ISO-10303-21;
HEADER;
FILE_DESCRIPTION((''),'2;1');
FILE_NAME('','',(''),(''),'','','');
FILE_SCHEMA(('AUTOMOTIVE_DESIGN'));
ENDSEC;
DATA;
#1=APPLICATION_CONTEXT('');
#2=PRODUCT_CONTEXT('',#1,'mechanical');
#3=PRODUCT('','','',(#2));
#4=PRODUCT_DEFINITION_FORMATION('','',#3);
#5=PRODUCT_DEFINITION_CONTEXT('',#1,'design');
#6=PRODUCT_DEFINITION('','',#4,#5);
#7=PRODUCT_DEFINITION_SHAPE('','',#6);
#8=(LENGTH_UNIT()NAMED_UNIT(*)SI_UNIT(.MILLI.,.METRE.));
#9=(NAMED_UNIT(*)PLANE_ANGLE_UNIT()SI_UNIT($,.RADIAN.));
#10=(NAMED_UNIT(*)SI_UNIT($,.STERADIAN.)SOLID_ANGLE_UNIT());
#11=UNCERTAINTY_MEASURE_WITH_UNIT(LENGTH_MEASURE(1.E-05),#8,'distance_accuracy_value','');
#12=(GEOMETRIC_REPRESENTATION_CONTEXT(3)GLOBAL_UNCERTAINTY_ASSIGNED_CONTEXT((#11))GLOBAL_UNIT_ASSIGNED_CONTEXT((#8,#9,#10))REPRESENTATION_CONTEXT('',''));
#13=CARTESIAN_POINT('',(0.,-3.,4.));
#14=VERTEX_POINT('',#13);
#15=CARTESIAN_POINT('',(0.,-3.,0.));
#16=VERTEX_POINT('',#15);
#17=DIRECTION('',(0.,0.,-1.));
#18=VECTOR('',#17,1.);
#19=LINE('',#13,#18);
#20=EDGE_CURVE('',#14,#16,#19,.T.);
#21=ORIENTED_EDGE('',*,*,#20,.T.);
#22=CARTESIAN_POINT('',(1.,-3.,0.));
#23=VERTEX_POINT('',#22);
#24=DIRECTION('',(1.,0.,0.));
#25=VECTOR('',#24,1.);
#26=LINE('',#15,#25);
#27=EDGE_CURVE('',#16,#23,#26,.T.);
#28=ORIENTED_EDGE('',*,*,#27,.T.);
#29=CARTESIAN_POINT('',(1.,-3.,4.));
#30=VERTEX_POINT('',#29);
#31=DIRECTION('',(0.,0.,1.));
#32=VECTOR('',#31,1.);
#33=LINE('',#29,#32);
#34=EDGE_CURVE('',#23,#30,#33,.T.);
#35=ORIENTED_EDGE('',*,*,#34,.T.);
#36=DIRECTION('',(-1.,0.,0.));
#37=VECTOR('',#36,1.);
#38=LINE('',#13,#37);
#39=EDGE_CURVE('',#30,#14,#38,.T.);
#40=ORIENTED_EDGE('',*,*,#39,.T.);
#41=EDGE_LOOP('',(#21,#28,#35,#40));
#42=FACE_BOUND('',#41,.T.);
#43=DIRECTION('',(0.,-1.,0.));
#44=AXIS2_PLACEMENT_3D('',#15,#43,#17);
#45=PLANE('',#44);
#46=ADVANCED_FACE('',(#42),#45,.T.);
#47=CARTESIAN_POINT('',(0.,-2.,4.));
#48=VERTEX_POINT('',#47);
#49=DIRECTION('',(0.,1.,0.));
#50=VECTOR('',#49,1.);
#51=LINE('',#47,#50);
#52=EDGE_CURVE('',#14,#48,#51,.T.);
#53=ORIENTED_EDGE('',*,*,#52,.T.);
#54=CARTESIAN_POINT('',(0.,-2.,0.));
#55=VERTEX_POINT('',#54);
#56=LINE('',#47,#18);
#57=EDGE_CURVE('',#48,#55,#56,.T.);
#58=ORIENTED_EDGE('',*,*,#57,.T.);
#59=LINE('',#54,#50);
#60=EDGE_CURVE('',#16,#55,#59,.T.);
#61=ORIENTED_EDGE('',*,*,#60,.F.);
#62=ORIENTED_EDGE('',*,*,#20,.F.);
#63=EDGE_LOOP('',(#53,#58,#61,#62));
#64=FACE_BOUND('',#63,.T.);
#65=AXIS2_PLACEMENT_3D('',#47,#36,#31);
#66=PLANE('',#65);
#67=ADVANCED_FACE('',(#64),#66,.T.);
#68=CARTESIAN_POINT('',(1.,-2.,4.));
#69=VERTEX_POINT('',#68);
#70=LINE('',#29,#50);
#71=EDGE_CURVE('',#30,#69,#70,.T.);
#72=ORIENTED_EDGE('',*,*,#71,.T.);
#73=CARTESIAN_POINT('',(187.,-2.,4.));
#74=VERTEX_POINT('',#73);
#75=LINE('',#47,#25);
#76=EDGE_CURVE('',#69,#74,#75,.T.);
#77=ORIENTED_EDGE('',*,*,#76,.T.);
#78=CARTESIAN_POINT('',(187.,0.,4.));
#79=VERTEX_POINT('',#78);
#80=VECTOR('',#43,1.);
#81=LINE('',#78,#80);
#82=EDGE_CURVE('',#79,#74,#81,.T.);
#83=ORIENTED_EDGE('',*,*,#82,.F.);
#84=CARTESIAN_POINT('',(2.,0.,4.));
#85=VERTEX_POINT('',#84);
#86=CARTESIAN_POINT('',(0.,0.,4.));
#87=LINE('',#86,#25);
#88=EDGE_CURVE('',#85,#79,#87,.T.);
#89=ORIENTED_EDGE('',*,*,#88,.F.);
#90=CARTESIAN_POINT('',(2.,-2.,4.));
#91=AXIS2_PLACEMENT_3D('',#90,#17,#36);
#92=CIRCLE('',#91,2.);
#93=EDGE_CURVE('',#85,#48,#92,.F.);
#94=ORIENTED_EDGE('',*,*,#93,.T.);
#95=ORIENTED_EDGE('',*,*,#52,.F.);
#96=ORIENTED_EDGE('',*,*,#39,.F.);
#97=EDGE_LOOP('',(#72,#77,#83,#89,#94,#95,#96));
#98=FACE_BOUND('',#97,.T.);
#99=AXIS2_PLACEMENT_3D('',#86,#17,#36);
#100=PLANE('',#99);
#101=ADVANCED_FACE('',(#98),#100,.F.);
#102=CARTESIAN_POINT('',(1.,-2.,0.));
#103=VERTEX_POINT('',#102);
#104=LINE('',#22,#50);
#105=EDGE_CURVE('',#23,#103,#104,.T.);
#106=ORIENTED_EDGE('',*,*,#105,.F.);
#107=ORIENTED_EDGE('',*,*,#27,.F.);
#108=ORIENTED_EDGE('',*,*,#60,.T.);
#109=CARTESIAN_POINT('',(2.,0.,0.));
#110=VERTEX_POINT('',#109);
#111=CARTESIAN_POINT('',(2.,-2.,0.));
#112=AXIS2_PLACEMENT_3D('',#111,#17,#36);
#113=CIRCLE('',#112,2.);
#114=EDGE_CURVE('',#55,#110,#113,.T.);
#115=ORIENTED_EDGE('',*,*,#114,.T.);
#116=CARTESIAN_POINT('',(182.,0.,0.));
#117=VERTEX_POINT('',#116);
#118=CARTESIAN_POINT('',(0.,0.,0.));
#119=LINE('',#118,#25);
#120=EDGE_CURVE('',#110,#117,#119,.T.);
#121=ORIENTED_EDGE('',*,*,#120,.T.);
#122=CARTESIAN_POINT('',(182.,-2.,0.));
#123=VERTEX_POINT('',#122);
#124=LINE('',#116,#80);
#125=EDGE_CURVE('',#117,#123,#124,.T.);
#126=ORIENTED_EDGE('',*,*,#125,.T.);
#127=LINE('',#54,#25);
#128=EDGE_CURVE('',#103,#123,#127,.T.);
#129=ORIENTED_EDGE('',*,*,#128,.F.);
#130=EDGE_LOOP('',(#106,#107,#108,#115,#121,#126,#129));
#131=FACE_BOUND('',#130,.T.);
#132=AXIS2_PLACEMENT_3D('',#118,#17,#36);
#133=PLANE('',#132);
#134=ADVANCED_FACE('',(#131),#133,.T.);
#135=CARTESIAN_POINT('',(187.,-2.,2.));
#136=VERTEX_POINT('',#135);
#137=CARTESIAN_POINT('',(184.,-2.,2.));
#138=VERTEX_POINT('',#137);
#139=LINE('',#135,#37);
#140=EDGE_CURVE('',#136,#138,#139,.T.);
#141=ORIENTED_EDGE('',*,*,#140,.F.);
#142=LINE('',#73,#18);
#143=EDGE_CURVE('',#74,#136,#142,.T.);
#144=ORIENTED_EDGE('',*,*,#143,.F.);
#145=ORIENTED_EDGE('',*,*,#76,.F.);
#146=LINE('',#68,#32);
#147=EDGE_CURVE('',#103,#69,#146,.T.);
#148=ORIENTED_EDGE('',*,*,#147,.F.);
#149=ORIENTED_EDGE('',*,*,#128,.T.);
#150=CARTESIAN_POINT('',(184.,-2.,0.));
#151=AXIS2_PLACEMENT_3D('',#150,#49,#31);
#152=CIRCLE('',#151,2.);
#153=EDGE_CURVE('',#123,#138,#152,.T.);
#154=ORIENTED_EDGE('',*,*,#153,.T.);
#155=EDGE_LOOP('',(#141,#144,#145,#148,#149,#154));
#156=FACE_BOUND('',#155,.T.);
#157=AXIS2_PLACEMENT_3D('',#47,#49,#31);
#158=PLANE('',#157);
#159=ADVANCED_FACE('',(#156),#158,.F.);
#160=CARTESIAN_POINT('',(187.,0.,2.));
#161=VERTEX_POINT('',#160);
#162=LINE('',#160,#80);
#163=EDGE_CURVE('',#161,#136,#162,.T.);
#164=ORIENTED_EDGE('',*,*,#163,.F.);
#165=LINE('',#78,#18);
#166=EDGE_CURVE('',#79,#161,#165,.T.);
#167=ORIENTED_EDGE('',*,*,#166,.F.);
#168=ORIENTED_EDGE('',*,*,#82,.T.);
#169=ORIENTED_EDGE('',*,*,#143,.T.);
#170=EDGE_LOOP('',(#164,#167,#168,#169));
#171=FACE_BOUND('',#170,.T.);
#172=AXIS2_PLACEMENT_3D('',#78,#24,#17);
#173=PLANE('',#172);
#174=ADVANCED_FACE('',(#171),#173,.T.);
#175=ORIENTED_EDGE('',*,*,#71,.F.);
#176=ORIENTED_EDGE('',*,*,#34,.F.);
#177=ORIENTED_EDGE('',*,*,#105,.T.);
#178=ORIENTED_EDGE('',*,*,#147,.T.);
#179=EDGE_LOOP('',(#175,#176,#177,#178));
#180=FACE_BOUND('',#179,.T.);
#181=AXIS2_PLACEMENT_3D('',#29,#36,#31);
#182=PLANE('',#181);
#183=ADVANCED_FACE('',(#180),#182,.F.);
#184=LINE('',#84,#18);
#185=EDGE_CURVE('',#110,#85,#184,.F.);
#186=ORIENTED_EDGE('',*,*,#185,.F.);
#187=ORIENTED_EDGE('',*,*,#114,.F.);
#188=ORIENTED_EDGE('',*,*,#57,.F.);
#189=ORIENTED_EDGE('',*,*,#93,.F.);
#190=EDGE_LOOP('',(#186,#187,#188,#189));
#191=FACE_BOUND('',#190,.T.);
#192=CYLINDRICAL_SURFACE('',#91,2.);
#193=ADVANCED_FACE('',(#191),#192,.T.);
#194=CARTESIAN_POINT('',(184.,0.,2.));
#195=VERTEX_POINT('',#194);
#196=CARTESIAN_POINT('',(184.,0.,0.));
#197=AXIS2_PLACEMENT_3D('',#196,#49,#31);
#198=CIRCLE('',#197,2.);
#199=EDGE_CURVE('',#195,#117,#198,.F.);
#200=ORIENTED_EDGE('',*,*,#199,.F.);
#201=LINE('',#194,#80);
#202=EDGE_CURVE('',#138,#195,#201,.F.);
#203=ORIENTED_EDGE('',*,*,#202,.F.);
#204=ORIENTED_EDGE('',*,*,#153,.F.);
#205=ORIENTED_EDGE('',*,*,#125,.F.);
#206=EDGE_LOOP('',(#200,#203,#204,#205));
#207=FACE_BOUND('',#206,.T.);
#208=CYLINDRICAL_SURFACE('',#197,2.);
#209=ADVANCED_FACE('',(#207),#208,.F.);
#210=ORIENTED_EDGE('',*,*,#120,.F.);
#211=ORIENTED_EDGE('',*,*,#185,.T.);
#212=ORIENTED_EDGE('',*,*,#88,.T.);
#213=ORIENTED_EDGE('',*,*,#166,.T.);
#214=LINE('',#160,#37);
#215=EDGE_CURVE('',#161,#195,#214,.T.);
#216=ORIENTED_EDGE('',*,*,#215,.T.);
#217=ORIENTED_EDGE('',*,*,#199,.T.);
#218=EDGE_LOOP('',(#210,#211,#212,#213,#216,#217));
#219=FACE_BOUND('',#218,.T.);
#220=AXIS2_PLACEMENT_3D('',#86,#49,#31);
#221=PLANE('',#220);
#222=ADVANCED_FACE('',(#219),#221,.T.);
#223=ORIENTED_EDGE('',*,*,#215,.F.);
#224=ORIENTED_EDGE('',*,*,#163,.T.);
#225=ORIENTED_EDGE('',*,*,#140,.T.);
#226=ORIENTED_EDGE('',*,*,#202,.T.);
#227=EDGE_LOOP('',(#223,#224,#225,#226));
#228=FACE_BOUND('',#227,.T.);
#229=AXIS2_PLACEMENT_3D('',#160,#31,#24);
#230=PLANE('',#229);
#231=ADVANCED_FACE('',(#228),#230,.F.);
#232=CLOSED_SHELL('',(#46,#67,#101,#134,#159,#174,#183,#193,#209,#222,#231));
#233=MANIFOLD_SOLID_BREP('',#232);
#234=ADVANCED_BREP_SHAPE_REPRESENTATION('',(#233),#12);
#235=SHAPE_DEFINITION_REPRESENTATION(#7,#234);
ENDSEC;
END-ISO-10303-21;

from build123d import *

# Parameters (mm, degrees)
SKETCH_1_W          = 187
SKETCH_1_H          = 2
EXTRUDE_1_DEPTH     = 4
SKETCH_2_W          = 1
SKETCH_2_H          = 4
EXTRUDE_1_2_DEPTH   = 1
FILLET_1_R          = 2
SKETCH_3_W          = 5
SKETCH_3_H          = 2
CUT_EXTRUDE_1_DEPTH = 188.053468292
FILLET_2_R          = 2


with BuildPart() as part:
    # 草图1 → Extrude 1 (new body)
    with BuildSketch(Plane.XY):
        with Locations((93.5, -1)):
            Rectangle(SKETCH_1_W, SKETCH_1_H)
    extrude(amount=EXTRUDE_1_DEPTH)

    # 草图2 → Extrude 1 2 (add)
    with BuildSketch(Plane.XZ.offset(2)):
        with Locations((0.5, 2)):
            Rectangle(SKETCH_2_W, SKETCH_2_H)
    extrude(amount=EXTRUDE_1_2_DEPTH)

    # 圆角1
    fillet_1_edges = [part.edges().sort_by_distance(p)[0] for p in [
        (0, 0, 2),
    ]]
    fillet(fillet_1_edges, radius=FILLET_1_R)

    # 草图3 → 切除-拉伸1 (cut, through all)
    with BuildSketch(Plane.XZ.offset(2)):
        with Locations((184.5, 1)):
            Rectangle(SKETCH_3_W, SKETCH_3_H)
    extrude(amount=-CUT_EXTRUDE_1_DEPTH, mode=Mode.SUBTRACT)

    # 圆角2
    fillet_2_edges = [part.edges().sort_by_distance(p)[0] for p in [
        (182, -1, 2),
    ]]
    fillet(fillet_2_edges, radius=FILLET_2_R - 0.0001)  # a hair under: the kernel refuses the full size


solid = part.part
